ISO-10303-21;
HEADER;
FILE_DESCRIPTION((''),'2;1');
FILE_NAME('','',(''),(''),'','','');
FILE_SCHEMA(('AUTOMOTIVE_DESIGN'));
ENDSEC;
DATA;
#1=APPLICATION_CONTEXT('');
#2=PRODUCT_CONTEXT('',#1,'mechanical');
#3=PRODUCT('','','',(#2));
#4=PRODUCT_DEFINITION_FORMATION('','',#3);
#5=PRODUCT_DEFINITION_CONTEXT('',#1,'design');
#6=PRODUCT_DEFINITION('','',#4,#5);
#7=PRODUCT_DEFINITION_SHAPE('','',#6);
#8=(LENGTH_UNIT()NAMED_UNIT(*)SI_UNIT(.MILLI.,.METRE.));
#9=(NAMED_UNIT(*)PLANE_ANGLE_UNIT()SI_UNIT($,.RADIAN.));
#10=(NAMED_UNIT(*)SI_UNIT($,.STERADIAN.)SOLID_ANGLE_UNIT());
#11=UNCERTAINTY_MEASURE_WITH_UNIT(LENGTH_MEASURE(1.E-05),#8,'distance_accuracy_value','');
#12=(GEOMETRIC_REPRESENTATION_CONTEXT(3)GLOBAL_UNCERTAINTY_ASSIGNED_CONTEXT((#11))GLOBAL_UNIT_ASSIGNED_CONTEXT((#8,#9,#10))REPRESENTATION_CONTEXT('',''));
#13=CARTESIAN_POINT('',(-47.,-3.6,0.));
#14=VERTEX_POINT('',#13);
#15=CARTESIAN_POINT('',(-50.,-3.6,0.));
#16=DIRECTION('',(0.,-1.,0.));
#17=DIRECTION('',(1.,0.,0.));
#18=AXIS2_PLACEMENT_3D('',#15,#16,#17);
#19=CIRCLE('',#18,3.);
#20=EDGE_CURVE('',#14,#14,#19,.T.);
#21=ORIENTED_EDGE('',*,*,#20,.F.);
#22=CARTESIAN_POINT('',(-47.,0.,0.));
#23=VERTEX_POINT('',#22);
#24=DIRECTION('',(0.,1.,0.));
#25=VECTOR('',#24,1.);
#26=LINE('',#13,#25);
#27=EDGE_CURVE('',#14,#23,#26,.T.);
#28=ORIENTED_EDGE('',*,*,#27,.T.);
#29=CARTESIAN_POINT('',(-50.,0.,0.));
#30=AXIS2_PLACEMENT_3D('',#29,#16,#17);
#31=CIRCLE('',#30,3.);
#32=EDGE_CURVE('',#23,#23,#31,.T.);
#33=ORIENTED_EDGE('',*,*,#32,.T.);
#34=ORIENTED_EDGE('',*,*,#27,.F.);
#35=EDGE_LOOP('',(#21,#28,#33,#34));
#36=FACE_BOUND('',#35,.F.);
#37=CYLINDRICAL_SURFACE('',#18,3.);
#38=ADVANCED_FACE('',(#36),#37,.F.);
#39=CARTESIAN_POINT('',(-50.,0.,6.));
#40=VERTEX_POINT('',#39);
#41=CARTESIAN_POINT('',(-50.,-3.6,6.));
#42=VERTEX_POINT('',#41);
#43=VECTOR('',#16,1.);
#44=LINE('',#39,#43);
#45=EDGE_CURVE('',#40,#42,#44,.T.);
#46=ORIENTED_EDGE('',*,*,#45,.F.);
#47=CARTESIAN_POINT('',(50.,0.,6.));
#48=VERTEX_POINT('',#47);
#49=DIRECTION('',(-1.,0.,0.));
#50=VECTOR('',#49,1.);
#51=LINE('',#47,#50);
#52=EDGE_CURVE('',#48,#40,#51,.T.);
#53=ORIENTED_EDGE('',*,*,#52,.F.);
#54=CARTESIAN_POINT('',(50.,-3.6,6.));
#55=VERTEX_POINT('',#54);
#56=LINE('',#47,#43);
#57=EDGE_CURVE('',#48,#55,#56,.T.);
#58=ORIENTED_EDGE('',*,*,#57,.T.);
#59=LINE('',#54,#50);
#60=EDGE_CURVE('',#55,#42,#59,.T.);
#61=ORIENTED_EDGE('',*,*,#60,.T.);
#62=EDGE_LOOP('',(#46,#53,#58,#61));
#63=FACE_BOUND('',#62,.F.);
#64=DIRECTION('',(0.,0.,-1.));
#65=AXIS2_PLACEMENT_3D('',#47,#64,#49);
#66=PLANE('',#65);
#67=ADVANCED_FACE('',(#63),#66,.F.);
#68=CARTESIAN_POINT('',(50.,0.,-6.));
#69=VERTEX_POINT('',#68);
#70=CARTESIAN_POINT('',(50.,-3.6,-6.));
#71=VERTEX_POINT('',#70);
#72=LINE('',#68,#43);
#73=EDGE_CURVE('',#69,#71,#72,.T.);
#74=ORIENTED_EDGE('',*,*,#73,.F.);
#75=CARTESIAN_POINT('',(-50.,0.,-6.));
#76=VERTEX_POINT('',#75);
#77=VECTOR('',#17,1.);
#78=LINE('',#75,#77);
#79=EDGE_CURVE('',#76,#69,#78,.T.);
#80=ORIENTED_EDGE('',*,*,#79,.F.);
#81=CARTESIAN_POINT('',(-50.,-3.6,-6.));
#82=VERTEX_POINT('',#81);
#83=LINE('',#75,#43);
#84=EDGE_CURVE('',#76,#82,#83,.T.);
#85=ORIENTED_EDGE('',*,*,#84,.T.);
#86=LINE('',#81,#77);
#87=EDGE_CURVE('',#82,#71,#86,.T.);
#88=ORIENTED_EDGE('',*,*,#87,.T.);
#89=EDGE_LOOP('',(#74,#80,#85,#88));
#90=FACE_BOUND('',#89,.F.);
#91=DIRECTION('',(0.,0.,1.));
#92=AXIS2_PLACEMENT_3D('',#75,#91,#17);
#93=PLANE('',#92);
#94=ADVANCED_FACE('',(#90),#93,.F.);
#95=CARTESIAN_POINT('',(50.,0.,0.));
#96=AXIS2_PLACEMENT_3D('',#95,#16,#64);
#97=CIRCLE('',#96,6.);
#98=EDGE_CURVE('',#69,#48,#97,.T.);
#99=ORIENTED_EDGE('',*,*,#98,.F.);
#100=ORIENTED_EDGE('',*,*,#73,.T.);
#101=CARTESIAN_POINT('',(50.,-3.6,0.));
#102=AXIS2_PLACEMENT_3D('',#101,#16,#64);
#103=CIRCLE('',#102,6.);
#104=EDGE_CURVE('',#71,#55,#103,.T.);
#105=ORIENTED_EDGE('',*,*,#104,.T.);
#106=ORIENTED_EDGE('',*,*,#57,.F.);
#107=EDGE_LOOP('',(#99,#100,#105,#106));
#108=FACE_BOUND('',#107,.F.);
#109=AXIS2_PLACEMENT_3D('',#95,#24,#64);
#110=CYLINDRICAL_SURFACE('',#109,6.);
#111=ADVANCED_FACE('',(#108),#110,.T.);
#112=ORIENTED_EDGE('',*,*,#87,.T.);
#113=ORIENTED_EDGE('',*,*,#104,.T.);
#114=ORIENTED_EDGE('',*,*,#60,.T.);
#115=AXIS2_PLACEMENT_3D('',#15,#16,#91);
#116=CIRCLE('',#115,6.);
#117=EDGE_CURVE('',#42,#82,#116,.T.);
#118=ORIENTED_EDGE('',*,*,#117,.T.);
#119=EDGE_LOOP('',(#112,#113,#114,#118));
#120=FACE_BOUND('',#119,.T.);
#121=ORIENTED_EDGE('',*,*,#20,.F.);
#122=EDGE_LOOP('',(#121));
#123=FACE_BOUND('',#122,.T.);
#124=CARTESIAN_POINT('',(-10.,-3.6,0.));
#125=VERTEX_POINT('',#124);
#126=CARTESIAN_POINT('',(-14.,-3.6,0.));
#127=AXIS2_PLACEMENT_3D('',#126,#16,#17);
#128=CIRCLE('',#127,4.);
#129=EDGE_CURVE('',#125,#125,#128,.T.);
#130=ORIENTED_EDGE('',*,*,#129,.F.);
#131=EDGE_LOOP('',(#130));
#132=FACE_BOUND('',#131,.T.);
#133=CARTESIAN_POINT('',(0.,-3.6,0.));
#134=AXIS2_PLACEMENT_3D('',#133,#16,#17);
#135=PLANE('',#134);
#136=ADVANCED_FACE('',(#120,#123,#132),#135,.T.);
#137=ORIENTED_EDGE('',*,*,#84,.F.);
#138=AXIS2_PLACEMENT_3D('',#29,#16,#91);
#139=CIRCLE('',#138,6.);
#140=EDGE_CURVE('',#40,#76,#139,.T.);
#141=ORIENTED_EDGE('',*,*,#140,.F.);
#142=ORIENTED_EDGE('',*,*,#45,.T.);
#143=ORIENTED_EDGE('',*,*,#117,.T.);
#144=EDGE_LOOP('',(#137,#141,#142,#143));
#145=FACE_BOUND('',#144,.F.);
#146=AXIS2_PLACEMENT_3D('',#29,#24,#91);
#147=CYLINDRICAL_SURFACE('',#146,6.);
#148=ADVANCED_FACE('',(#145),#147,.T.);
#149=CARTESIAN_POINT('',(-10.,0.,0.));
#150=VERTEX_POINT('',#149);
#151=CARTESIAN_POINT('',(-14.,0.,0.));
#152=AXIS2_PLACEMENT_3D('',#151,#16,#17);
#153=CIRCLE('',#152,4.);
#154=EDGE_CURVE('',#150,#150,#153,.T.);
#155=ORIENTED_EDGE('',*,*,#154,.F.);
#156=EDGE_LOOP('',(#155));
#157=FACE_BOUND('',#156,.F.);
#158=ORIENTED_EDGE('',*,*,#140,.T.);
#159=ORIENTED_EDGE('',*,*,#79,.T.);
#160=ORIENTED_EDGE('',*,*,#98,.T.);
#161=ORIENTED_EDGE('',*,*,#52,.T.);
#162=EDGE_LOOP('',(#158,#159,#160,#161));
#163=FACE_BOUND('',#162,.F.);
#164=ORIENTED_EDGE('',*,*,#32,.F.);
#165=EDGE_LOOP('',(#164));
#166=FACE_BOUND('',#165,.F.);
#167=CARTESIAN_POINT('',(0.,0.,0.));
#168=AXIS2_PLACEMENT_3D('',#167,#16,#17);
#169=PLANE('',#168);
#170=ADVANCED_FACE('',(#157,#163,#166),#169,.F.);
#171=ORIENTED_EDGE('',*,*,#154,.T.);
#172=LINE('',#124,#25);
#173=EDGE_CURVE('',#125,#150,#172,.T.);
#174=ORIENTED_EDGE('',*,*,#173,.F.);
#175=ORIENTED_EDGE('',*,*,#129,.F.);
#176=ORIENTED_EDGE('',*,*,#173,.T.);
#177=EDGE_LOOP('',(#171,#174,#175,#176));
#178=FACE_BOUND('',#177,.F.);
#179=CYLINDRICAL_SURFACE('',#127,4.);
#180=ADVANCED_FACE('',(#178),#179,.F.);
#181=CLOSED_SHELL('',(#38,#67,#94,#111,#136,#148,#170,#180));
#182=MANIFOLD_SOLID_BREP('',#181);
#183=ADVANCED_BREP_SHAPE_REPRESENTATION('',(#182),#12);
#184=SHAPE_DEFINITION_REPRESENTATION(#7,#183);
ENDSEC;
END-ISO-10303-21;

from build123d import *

# Parameters (mm, degrees)
F1_DEPTH = 3.6
F2_R     = 3
F3_DEPTH = 3.6
F4_R     = 4
F5_DEPTH = 3.601


# Not quite as in the source:
# - a feature names something its author has since deleted; it is built from what else it names


with BuildPart() as f1:
    # F0 (on Front) → F1 (new body)
    with BuildSketch(Plane.XZ):
        with BuildLine():
            Line((50, 6), (-50, 6))
            ThreePointArc((-50, 6), (-56, 0), (-50, -6))
            Line((-50, -6), (50, -6))
            ThreePointArc((50, -6), (56, 0), (50, 6))
        make_face()
    extrude(amount=F1_DEPTH)

    # F2 (on face) → F3 (cut, through all)
    with BuildSketch(Plane.XZ.offset(3.6)):
        with Locations((-50, 0)):
            Circle(F2_R)
    extrude(amount=-F3_DEPTH, mode=Mode.SUBTRACT)

    # F4 (on face) → F5 (cut, through all)
    with BuildSketch(Plane.XZ.offset(3.6)):
        with Locations((-14, 0)):
            Circle(F4_R)
    extrude(amount=-F5_DEPTH, mode=Mode.SUBTRACT)


solid = f1.part
